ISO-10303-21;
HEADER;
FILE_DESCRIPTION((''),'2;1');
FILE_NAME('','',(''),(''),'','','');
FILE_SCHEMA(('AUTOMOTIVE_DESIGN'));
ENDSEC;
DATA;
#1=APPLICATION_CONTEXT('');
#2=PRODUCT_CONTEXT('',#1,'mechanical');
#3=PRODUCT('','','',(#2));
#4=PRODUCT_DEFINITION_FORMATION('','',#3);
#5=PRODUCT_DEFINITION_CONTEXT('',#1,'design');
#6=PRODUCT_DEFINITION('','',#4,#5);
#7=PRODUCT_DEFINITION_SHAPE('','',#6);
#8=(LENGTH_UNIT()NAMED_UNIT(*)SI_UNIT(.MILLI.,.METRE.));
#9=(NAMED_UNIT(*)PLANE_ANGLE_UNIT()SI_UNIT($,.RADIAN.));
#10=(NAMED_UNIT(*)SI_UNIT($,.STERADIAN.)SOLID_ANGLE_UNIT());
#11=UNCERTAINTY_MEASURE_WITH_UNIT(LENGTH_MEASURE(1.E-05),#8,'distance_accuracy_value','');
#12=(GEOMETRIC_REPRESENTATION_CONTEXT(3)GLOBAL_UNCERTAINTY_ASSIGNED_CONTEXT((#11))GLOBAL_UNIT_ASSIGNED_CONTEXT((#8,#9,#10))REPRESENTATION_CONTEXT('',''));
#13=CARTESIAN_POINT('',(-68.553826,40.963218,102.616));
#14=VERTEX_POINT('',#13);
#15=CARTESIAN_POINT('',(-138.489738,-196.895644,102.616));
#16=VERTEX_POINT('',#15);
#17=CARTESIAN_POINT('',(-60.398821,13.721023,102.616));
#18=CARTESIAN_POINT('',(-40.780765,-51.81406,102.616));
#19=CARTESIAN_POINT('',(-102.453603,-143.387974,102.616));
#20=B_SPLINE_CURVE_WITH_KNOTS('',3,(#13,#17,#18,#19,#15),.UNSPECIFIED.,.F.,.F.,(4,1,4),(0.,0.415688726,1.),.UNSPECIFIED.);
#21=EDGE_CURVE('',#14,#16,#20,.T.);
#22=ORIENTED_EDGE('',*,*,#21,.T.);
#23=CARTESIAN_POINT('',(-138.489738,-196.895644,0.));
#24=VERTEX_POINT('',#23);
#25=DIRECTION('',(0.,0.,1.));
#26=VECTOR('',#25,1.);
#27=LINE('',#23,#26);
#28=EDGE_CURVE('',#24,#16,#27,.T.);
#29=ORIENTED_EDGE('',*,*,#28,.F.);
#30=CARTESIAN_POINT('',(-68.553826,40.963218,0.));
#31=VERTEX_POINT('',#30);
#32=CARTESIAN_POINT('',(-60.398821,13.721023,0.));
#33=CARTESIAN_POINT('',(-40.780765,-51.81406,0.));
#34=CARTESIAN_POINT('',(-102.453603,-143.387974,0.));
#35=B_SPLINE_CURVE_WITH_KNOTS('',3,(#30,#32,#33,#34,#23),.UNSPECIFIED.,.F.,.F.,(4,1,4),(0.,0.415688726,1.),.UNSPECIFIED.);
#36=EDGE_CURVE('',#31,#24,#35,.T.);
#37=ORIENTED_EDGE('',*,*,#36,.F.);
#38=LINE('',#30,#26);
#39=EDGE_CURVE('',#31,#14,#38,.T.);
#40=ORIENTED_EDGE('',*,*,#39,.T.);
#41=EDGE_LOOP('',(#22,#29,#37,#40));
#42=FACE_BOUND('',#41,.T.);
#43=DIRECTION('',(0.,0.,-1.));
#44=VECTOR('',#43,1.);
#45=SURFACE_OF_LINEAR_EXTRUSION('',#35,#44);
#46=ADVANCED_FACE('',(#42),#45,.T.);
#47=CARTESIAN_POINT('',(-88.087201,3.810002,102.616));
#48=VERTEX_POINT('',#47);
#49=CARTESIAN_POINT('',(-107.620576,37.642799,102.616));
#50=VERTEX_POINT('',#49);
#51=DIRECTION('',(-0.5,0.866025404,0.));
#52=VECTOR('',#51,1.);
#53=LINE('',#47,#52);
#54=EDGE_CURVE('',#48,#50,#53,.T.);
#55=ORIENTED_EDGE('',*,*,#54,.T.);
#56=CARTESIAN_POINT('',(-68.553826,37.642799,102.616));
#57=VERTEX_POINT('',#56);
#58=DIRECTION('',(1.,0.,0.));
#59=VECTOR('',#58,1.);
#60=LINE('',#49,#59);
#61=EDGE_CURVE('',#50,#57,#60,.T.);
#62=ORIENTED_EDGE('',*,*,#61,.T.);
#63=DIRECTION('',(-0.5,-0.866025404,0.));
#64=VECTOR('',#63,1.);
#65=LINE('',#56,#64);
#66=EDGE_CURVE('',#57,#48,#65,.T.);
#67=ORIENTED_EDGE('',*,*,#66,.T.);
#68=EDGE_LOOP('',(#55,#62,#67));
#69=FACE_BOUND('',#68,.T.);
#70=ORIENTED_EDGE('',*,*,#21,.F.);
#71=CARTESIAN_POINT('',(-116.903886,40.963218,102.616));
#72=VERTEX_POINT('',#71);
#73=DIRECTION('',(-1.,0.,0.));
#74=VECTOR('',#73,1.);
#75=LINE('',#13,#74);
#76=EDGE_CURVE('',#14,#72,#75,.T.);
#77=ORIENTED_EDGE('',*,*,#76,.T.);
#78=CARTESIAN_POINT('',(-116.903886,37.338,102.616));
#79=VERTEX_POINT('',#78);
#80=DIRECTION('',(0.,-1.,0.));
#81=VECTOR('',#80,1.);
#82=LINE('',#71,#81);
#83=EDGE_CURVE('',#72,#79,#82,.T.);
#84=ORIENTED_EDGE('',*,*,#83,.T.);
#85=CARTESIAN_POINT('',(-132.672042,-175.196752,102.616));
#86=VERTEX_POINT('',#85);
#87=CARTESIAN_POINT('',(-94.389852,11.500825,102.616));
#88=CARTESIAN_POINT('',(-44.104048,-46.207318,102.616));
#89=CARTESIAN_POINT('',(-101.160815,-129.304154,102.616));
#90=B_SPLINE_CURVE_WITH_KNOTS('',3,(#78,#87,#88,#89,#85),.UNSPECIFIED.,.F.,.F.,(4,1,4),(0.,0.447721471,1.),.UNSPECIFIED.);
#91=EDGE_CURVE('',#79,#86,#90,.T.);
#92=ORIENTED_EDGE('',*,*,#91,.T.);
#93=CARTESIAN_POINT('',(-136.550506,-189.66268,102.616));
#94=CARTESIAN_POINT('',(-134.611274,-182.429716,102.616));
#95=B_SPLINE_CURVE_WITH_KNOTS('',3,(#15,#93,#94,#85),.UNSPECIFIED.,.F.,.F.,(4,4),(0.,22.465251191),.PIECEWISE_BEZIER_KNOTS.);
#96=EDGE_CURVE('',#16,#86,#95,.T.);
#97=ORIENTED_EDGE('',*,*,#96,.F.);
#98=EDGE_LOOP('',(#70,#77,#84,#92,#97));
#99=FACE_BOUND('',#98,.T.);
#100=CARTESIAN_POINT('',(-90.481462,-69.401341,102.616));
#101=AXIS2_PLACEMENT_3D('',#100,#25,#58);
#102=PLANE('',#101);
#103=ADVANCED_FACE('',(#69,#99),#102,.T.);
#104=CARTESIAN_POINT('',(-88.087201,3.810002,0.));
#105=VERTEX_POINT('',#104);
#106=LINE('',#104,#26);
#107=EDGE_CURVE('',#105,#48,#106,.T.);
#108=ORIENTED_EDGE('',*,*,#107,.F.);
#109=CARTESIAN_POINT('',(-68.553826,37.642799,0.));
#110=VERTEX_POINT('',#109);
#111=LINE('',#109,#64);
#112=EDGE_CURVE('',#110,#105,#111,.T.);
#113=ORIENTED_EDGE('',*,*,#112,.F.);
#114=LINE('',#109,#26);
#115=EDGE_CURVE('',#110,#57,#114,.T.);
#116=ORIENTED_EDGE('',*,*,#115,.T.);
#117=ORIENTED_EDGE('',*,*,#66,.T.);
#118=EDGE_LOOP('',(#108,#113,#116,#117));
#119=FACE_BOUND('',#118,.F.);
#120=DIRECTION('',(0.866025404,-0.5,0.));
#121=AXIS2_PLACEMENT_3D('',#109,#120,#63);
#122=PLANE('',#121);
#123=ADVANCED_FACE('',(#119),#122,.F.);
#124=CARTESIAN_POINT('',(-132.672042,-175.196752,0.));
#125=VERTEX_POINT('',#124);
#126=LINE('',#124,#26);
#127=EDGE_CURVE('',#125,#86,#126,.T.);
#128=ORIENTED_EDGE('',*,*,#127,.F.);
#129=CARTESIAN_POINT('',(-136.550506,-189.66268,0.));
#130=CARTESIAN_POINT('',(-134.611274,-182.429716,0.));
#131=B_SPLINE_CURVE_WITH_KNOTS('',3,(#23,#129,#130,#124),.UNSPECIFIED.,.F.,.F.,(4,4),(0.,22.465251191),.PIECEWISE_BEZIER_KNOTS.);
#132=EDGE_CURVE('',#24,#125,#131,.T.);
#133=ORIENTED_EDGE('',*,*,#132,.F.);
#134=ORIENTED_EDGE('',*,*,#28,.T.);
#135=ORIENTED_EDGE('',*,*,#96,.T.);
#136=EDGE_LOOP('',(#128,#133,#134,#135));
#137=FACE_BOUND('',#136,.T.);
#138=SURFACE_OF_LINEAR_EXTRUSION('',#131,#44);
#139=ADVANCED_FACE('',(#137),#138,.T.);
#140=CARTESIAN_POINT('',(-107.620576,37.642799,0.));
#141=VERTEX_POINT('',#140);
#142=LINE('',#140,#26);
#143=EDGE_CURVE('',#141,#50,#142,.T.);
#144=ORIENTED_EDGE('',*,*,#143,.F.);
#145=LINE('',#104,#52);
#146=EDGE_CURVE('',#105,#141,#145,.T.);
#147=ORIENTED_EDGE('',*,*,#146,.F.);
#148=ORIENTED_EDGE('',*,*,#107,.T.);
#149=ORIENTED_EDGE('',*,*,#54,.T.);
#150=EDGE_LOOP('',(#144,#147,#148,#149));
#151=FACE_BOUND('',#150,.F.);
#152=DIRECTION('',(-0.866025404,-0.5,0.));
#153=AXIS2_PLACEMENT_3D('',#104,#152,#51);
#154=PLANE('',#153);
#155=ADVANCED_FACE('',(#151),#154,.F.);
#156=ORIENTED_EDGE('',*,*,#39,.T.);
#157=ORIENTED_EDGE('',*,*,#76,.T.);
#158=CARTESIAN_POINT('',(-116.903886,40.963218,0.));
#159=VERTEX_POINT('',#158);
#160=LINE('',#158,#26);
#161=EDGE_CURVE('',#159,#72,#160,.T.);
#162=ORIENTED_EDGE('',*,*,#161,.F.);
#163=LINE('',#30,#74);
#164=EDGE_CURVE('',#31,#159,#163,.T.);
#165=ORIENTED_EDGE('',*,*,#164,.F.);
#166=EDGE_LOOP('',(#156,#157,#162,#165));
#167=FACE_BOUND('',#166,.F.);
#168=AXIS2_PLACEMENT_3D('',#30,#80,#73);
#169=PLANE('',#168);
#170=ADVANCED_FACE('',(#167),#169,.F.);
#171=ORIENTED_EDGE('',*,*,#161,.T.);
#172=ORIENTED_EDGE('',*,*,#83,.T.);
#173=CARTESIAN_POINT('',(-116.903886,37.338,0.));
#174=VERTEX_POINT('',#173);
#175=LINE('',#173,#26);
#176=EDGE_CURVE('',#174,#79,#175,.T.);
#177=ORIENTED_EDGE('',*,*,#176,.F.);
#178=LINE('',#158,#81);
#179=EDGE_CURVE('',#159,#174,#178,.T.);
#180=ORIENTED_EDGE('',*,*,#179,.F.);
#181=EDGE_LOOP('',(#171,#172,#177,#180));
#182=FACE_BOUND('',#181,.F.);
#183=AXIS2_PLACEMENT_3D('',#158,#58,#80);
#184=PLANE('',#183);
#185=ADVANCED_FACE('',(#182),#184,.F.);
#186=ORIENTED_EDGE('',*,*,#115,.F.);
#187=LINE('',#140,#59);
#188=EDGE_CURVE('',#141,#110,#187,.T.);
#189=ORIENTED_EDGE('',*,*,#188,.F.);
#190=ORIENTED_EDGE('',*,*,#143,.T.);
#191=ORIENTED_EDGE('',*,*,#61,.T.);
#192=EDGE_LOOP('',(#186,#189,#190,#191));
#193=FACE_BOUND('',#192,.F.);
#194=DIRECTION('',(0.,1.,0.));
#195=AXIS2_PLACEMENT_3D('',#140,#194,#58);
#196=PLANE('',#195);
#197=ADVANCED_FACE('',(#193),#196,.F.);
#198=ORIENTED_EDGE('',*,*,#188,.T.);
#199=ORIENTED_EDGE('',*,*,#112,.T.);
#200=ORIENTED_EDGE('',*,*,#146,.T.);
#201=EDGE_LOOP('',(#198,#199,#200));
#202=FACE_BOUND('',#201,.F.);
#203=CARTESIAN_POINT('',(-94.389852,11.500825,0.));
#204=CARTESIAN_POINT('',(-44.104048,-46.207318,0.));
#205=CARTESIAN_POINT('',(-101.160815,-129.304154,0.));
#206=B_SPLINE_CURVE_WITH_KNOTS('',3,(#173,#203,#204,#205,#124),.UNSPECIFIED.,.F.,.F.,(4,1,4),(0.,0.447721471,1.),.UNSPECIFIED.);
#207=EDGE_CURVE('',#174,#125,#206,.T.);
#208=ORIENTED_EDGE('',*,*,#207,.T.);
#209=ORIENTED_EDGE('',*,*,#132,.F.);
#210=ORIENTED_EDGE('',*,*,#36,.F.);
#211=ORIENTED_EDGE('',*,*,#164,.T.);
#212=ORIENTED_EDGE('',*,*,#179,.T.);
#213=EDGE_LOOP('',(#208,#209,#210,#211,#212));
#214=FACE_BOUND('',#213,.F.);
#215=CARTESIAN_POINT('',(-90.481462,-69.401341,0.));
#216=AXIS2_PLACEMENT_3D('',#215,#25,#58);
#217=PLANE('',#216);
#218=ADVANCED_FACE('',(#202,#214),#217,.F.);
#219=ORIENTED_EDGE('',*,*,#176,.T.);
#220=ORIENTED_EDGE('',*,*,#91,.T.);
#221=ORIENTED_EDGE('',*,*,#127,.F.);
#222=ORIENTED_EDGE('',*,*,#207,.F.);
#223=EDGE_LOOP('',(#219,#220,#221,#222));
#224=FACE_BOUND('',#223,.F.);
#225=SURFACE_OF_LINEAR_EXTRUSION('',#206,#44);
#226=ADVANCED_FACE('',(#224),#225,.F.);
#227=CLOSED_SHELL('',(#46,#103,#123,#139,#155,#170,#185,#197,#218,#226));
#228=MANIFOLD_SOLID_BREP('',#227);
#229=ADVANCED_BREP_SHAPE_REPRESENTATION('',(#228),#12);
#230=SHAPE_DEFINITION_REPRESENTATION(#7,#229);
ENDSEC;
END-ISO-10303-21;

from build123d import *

# Parameters (mm, degrees)
F4_DEPTH = 102.616


# Not quite as in the source:
# - a feature of the source that left no trace in its solid (it failed there, or was rolled back) is left out


with BuildPart() as f4:
    # F3 (on Top) → F4 (new body)
    with BuildSketch(Plane.XY):
        with BuildLine():
            Line((-116.903886199, 40.9632176161), (-116.903886199, 37.3379997909))
            add(Edge.make_bspline(
                [(-116.903886199, 37.3379997909), (-94.3898521159, 11.5008250837), (-44.1040481936, -46.2073180434), (-101.1608146078, -129.3041537381), (-132.6720416546, -175.1967519522)],
                knots=[0, 0, 0, 0, 0.4477214706, 1, 1, 1, 1], degree=3))
            add(Edge.make_bspline(
                [(-138.4897381067, -196.8956440687), (-136.550505956, -189.6626800299), (-134.6112738053, -182.429715991), (-132.6720416546, -175.1967519522)],
                knots=[0, 0, 0, 0, 22.4652511914, 22.4652511914, 22.4652511914, 22.4652511914], degree=3))
            add(Edge.make_bspline(
                [(-68.5538262124, 40.9632176161), (-60.3988212358, 13.7210225854), (-40.7807645704, -51.8140601445), (-102.453603187, -143.3879738574), (-138.4897381067, -196.8956440687)],
                knots=[0, 0, 0, 0, 0.4156887257, 1, 1, 1, 1], degree=3))
            Line((-68.5538262124, 40.9632176161), (-116.903886199, 40.9632176161))
        make_face()
        Polygon((-88.0872011185, 3.8100015372), (-107.6205760246, 37.6427993178), (-68.5538262124, 37.6427993178), align=None, mode=Mode.SUBTRACT)
    extrude(amount=F4_DEPTH)


solid = f4.part
